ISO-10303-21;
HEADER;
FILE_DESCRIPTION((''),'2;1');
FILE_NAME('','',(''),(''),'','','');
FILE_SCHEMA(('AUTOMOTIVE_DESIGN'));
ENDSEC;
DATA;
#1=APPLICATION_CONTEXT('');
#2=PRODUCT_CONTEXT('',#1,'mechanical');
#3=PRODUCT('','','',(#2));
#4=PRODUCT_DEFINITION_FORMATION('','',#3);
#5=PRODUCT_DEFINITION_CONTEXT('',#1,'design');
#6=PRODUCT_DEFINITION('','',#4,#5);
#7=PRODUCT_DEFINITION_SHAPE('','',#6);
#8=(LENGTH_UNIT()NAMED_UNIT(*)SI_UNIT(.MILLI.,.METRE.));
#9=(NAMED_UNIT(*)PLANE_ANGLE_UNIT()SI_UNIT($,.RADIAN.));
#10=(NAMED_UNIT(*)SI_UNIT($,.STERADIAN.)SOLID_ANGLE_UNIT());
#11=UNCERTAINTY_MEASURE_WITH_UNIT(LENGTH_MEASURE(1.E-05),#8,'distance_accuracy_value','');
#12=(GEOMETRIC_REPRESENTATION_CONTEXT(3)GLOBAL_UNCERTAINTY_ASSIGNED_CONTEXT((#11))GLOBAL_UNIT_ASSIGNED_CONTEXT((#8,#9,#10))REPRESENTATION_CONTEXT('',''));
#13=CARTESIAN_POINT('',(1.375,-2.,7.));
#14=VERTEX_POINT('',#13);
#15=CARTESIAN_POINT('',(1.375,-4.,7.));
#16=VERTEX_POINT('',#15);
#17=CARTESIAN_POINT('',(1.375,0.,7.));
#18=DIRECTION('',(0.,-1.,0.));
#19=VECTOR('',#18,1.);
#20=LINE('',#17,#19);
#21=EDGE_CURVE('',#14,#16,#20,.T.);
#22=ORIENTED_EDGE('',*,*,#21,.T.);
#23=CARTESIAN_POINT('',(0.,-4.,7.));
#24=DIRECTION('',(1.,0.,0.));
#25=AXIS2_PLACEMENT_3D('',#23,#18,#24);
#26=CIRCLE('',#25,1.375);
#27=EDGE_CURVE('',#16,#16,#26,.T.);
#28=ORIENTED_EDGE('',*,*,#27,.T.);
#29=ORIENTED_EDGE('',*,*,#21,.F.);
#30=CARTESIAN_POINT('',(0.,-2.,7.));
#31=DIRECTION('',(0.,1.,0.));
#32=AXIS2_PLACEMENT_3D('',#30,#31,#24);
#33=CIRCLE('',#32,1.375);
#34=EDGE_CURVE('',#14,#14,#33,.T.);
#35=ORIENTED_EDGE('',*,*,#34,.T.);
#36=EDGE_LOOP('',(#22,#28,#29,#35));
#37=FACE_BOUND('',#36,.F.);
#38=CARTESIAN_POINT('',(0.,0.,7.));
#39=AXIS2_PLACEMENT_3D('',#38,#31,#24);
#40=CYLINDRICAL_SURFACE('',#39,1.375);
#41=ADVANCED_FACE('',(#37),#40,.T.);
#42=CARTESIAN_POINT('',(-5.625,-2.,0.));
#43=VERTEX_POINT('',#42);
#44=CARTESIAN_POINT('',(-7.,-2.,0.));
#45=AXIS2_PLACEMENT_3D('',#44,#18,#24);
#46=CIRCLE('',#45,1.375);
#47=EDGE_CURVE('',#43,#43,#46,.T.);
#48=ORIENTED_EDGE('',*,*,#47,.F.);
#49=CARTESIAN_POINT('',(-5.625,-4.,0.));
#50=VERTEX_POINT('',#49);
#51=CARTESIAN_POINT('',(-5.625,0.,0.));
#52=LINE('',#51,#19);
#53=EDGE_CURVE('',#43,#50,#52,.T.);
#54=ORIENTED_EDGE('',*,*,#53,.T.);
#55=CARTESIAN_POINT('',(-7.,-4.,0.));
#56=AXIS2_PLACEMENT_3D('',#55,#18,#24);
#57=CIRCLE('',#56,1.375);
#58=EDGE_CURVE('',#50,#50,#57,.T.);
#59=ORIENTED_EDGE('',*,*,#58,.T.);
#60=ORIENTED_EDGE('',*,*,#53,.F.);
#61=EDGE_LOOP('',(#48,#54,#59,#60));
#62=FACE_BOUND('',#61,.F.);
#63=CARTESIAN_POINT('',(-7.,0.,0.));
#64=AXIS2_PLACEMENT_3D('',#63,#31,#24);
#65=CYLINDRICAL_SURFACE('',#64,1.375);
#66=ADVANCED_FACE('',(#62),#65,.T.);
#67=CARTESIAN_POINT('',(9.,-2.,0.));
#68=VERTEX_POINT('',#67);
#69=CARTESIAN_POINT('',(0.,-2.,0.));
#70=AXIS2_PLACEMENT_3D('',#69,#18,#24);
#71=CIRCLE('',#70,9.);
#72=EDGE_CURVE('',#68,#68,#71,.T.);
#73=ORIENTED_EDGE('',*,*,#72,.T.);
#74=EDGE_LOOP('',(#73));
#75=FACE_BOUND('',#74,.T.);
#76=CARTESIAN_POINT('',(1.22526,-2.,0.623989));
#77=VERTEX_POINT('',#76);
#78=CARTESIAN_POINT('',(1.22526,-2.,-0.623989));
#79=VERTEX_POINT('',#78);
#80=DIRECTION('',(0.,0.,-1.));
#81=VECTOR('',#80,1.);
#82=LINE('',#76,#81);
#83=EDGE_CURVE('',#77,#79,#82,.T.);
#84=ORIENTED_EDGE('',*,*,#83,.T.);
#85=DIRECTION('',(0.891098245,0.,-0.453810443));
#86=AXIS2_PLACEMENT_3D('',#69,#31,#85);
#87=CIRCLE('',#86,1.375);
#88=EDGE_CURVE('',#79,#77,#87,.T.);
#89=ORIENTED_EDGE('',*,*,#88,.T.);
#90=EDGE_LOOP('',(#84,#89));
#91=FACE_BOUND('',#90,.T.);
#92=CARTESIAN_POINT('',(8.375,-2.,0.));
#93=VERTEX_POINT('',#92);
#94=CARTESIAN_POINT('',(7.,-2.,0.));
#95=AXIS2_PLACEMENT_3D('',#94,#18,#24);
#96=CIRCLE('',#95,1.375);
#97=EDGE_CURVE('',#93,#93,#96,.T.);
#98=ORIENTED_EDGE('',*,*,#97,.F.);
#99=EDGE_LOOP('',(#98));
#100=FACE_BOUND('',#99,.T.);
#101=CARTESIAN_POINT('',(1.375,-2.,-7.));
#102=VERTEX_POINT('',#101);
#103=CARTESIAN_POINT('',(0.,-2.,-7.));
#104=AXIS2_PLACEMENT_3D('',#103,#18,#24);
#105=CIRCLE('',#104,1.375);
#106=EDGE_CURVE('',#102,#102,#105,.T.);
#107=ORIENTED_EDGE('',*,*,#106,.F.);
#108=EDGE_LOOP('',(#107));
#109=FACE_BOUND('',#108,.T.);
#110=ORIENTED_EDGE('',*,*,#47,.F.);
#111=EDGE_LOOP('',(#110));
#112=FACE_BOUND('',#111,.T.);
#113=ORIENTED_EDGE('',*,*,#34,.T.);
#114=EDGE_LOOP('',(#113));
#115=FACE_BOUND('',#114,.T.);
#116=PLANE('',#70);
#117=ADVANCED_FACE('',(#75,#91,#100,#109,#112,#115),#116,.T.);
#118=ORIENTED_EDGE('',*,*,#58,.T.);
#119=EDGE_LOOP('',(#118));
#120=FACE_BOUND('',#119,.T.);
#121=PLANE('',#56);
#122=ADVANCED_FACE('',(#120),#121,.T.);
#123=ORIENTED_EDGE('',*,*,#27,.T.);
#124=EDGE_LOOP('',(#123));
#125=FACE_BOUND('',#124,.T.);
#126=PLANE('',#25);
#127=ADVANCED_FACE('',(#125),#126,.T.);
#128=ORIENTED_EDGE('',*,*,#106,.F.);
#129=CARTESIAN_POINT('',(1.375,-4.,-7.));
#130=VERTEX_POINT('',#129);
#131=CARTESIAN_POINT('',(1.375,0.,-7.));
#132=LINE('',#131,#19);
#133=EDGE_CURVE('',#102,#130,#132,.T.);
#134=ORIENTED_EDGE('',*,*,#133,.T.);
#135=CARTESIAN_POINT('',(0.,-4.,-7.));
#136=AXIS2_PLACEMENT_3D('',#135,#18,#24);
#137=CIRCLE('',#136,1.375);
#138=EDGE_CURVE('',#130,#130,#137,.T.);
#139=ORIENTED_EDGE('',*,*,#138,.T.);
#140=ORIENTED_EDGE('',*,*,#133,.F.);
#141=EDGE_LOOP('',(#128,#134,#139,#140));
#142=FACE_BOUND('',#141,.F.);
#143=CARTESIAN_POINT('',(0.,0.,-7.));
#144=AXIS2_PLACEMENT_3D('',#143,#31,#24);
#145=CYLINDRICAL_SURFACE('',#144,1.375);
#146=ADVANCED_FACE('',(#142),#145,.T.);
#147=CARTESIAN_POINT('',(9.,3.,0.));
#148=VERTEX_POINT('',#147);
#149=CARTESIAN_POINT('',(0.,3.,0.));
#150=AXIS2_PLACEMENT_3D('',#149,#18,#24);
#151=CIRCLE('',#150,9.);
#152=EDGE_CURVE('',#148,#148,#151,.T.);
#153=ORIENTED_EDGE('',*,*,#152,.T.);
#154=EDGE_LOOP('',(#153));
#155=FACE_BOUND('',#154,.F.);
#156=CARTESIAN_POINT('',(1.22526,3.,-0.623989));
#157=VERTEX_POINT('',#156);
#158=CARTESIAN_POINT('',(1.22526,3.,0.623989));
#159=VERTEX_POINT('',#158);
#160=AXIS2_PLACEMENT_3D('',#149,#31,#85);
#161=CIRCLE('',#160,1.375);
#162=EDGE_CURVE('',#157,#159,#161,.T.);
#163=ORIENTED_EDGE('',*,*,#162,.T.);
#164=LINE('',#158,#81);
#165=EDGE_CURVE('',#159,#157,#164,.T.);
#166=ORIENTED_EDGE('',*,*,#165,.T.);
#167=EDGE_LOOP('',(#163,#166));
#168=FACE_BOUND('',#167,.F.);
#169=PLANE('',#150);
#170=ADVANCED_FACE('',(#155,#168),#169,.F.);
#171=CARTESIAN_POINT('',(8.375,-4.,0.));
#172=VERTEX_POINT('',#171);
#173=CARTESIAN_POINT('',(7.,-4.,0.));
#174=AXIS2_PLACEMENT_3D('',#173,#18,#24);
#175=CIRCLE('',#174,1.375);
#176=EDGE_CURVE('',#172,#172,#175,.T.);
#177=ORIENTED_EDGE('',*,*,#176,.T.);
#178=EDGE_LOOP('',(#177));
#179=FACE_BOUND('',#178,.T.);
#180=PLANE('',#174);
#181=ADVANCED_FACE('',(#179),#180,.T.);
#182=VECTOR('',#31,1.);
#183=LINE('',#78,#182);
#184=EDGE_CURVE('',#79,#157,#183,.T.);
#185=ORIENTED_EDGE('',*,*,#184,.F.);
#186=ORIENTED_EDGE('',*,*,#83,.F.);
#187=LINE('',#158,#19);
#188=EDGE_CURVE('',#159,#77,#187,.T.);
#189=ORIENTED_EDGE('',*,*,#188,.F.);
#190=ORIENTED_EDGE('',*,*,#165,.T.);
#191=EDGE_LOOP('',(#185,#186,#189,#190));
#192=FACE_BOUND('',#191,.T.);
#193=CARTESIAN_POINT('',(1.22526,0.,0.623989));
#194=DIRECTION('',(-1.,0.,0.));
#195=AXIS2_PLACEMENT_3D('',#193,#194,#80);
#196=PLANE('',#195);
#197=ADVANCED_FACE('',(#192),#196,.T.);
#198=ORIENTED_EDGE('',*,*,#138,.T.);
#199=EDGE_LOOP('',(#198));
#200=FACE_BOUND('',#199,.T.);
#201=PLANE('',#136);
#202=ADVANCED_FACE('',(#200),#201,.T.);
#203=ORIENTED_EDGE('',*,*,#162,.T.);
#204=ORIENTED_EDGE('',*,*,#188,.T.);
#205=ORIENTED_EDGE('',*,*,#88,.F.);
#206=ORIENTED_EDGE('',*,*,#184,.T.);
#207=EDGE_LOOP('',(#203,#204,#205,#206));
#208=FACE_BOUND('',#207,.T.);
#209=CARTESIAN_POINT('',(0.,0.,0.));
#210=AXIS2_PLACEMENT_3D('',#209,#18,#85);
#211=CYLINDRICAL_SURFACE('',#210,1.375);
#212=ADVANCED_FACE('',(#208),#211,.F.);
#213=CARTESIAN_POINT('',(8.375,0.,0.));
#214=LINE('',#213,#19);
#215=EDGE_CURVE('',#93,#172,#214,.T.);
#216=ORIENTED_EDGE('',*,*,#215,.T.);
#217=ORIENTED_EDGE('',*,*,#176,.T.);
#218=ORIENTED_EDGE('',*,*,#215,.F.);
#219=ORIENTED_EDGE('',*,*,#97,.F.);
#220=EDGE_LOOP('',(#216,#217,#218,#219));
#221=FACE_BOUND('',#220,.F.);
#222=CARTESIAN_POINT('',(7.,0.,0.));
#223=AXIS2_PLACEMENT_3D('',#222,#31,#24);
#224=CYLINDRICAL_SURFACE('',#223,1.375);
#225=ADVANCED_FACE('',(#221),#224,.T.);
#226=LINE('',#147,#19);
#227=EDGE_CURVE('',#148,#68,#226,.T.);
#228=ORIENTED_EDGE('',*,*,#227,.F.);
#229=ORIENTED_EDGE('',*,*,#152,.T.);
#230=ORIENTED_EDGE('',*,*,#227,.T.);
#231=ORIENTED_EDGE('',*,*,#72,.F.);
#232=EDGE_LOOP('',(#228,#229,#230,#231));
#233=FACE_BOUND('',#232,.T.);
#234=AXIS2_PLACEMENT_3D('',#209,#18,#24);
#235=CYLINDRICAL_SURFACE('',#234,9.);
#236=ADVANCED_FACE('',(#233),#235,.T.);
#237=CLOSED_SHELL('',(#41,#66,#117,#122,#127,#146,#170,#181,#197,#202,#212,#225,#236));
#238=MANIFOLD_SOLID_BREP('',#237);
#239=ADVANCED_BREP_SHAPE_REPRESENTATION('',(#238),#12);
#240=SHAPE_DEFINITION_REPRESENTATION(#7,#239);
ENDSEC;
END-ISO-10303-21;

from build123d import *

# Parameters (mm, degrees)
F0_R     = 9
F0_R_2   = 1.375
F0_R_3   = 4
F1_DEPTH = 2
F2_DEPTH = 4
F3_DEPTH = 3


with BuildPart() as f1:
    # F0 (on Front) → F1 (new body)
    with BuildSketch(Plane.XZ):
        Circle(F0_R)
        with Locations((0, -7)):
            Circle(F0_R_2, mode=Mode.SUBTRACT)
        with Locations((-7, 0)):
            Circle(F0_R_2, mode=Mode.SUBTRACT)
        Circle(F0_R_3, mode=Mode.SUBTRACT)
        with Locations((7, 0)):
            Circle(F0_R_2, mode=Mode.SUBTRACT)
        with Locations((0, 7)):
            Circle(F0_R_2, mode=Mode.SUBTRACT)
        Circle(F0_R_3)
        with BuildLine():
            ThreePointArc((1.2252600864, 0.6239893595), (1.337041065, 0.3208522879), (1.375, 0))
            ThreePointArc((1.375, 0), (1.337041065, -0.3208522879), (1.2252600864, -0.6239893595))
            ThreePointArc((1.2252600864, -0.6239893595), (-1.375, 0), (1.2252600864, 0.6239893595))
        make_face(mode=Mode.SUBTRACT)
        with Locations((0, 7)):
            Circle(F0_R_2)
        with BuildLine():
            ThreePointArc((1.2252600864, -0.6239893595), (1.337041065, -0.3208522879), (1.375, 0))
            ThreePointArc((1.375, 0), (1.337041065, 0.3208522879), (1.2252600864, 0.6239893595))
            Line((1.2252600864, 0.6239893595), (1.2252600864, -0.6239893595))
        make_face()
    extrude(amount=F1_DEPTH)

    # F0 (on Front) → F2 (join)
    with BuildSketch(Plane.XZ):
        with Locations((-7, 0)):
            Circle(F0_R_2)
        with Locations((0, 7)):
            Circle(F0_R_2)
        with Locations((7, 0)):
            Circle(F0_R_2)
        with Locations((0, -7)):
            Circle(F0_R_2)
    extrude(amount=F2_DEPTH)

    # F0 (on Front) → F3 (join)
    with BuildSketch(Plane.XZ):
        Circle(F0_R)
        with Locations((0, -7)):
            Circle(F0_R_2, mode=Mode.SUBTRACT)
        with Locations((-7, 0)):
            Circle(F0_R_2, mode=Mode.SUBTRACT)
        Circle(F0_R_3, mode=Mode.SUBTRACT)
        with Locations((7, 0)):
            Circle(F0_R_2, mode=Mode.SUBTRACT)
        with Locations((0, 7)):
            Circle(F0_R_2, mode=Mode.SUBTRACT)
        Circle(F0_R_3)
        with BuildLine():
            ThreePointArc((1.2252600864, 0.6239893595), (1.337041065, 0.3208522879), (1.375, 0))
            ThreePointArc((1.375, 0), (1.337041065, -0.3208522879), (1.2252600864, -0.6239893595))
            ThreePointArc((1.2252600864, -0.6239893595), (-1.375, 0), (1.2252600864, 0.6239893595))
        make_face(mode=Mode.SUBTRACT)
        with Locations((7, 0)):
            Circle(F0_R_2)
        with Locations((0, 7)):
            Circle(F0_R_2)
        with Locations((-7, 0)):
            Circle(F0_R_2)
        with Locations((0, -7)):
            Circle(F0_R_2)
        with BuildLine():
            ThreePointArc((1.2252600864, -0.6239893595), (1.337041065, -0.3208522879), (1.375, 0))
            ThreePointArc((1.375, 0), (1.337041065, 0.3208522879), (1.2252600864, 0.6239893595))
            Line((1.2252600864, 0.6239893595), (1.2252600864, -0.6239893595))
        make_face()
    extrude(amount=-F3_DEPTH)


solid = f1.part
